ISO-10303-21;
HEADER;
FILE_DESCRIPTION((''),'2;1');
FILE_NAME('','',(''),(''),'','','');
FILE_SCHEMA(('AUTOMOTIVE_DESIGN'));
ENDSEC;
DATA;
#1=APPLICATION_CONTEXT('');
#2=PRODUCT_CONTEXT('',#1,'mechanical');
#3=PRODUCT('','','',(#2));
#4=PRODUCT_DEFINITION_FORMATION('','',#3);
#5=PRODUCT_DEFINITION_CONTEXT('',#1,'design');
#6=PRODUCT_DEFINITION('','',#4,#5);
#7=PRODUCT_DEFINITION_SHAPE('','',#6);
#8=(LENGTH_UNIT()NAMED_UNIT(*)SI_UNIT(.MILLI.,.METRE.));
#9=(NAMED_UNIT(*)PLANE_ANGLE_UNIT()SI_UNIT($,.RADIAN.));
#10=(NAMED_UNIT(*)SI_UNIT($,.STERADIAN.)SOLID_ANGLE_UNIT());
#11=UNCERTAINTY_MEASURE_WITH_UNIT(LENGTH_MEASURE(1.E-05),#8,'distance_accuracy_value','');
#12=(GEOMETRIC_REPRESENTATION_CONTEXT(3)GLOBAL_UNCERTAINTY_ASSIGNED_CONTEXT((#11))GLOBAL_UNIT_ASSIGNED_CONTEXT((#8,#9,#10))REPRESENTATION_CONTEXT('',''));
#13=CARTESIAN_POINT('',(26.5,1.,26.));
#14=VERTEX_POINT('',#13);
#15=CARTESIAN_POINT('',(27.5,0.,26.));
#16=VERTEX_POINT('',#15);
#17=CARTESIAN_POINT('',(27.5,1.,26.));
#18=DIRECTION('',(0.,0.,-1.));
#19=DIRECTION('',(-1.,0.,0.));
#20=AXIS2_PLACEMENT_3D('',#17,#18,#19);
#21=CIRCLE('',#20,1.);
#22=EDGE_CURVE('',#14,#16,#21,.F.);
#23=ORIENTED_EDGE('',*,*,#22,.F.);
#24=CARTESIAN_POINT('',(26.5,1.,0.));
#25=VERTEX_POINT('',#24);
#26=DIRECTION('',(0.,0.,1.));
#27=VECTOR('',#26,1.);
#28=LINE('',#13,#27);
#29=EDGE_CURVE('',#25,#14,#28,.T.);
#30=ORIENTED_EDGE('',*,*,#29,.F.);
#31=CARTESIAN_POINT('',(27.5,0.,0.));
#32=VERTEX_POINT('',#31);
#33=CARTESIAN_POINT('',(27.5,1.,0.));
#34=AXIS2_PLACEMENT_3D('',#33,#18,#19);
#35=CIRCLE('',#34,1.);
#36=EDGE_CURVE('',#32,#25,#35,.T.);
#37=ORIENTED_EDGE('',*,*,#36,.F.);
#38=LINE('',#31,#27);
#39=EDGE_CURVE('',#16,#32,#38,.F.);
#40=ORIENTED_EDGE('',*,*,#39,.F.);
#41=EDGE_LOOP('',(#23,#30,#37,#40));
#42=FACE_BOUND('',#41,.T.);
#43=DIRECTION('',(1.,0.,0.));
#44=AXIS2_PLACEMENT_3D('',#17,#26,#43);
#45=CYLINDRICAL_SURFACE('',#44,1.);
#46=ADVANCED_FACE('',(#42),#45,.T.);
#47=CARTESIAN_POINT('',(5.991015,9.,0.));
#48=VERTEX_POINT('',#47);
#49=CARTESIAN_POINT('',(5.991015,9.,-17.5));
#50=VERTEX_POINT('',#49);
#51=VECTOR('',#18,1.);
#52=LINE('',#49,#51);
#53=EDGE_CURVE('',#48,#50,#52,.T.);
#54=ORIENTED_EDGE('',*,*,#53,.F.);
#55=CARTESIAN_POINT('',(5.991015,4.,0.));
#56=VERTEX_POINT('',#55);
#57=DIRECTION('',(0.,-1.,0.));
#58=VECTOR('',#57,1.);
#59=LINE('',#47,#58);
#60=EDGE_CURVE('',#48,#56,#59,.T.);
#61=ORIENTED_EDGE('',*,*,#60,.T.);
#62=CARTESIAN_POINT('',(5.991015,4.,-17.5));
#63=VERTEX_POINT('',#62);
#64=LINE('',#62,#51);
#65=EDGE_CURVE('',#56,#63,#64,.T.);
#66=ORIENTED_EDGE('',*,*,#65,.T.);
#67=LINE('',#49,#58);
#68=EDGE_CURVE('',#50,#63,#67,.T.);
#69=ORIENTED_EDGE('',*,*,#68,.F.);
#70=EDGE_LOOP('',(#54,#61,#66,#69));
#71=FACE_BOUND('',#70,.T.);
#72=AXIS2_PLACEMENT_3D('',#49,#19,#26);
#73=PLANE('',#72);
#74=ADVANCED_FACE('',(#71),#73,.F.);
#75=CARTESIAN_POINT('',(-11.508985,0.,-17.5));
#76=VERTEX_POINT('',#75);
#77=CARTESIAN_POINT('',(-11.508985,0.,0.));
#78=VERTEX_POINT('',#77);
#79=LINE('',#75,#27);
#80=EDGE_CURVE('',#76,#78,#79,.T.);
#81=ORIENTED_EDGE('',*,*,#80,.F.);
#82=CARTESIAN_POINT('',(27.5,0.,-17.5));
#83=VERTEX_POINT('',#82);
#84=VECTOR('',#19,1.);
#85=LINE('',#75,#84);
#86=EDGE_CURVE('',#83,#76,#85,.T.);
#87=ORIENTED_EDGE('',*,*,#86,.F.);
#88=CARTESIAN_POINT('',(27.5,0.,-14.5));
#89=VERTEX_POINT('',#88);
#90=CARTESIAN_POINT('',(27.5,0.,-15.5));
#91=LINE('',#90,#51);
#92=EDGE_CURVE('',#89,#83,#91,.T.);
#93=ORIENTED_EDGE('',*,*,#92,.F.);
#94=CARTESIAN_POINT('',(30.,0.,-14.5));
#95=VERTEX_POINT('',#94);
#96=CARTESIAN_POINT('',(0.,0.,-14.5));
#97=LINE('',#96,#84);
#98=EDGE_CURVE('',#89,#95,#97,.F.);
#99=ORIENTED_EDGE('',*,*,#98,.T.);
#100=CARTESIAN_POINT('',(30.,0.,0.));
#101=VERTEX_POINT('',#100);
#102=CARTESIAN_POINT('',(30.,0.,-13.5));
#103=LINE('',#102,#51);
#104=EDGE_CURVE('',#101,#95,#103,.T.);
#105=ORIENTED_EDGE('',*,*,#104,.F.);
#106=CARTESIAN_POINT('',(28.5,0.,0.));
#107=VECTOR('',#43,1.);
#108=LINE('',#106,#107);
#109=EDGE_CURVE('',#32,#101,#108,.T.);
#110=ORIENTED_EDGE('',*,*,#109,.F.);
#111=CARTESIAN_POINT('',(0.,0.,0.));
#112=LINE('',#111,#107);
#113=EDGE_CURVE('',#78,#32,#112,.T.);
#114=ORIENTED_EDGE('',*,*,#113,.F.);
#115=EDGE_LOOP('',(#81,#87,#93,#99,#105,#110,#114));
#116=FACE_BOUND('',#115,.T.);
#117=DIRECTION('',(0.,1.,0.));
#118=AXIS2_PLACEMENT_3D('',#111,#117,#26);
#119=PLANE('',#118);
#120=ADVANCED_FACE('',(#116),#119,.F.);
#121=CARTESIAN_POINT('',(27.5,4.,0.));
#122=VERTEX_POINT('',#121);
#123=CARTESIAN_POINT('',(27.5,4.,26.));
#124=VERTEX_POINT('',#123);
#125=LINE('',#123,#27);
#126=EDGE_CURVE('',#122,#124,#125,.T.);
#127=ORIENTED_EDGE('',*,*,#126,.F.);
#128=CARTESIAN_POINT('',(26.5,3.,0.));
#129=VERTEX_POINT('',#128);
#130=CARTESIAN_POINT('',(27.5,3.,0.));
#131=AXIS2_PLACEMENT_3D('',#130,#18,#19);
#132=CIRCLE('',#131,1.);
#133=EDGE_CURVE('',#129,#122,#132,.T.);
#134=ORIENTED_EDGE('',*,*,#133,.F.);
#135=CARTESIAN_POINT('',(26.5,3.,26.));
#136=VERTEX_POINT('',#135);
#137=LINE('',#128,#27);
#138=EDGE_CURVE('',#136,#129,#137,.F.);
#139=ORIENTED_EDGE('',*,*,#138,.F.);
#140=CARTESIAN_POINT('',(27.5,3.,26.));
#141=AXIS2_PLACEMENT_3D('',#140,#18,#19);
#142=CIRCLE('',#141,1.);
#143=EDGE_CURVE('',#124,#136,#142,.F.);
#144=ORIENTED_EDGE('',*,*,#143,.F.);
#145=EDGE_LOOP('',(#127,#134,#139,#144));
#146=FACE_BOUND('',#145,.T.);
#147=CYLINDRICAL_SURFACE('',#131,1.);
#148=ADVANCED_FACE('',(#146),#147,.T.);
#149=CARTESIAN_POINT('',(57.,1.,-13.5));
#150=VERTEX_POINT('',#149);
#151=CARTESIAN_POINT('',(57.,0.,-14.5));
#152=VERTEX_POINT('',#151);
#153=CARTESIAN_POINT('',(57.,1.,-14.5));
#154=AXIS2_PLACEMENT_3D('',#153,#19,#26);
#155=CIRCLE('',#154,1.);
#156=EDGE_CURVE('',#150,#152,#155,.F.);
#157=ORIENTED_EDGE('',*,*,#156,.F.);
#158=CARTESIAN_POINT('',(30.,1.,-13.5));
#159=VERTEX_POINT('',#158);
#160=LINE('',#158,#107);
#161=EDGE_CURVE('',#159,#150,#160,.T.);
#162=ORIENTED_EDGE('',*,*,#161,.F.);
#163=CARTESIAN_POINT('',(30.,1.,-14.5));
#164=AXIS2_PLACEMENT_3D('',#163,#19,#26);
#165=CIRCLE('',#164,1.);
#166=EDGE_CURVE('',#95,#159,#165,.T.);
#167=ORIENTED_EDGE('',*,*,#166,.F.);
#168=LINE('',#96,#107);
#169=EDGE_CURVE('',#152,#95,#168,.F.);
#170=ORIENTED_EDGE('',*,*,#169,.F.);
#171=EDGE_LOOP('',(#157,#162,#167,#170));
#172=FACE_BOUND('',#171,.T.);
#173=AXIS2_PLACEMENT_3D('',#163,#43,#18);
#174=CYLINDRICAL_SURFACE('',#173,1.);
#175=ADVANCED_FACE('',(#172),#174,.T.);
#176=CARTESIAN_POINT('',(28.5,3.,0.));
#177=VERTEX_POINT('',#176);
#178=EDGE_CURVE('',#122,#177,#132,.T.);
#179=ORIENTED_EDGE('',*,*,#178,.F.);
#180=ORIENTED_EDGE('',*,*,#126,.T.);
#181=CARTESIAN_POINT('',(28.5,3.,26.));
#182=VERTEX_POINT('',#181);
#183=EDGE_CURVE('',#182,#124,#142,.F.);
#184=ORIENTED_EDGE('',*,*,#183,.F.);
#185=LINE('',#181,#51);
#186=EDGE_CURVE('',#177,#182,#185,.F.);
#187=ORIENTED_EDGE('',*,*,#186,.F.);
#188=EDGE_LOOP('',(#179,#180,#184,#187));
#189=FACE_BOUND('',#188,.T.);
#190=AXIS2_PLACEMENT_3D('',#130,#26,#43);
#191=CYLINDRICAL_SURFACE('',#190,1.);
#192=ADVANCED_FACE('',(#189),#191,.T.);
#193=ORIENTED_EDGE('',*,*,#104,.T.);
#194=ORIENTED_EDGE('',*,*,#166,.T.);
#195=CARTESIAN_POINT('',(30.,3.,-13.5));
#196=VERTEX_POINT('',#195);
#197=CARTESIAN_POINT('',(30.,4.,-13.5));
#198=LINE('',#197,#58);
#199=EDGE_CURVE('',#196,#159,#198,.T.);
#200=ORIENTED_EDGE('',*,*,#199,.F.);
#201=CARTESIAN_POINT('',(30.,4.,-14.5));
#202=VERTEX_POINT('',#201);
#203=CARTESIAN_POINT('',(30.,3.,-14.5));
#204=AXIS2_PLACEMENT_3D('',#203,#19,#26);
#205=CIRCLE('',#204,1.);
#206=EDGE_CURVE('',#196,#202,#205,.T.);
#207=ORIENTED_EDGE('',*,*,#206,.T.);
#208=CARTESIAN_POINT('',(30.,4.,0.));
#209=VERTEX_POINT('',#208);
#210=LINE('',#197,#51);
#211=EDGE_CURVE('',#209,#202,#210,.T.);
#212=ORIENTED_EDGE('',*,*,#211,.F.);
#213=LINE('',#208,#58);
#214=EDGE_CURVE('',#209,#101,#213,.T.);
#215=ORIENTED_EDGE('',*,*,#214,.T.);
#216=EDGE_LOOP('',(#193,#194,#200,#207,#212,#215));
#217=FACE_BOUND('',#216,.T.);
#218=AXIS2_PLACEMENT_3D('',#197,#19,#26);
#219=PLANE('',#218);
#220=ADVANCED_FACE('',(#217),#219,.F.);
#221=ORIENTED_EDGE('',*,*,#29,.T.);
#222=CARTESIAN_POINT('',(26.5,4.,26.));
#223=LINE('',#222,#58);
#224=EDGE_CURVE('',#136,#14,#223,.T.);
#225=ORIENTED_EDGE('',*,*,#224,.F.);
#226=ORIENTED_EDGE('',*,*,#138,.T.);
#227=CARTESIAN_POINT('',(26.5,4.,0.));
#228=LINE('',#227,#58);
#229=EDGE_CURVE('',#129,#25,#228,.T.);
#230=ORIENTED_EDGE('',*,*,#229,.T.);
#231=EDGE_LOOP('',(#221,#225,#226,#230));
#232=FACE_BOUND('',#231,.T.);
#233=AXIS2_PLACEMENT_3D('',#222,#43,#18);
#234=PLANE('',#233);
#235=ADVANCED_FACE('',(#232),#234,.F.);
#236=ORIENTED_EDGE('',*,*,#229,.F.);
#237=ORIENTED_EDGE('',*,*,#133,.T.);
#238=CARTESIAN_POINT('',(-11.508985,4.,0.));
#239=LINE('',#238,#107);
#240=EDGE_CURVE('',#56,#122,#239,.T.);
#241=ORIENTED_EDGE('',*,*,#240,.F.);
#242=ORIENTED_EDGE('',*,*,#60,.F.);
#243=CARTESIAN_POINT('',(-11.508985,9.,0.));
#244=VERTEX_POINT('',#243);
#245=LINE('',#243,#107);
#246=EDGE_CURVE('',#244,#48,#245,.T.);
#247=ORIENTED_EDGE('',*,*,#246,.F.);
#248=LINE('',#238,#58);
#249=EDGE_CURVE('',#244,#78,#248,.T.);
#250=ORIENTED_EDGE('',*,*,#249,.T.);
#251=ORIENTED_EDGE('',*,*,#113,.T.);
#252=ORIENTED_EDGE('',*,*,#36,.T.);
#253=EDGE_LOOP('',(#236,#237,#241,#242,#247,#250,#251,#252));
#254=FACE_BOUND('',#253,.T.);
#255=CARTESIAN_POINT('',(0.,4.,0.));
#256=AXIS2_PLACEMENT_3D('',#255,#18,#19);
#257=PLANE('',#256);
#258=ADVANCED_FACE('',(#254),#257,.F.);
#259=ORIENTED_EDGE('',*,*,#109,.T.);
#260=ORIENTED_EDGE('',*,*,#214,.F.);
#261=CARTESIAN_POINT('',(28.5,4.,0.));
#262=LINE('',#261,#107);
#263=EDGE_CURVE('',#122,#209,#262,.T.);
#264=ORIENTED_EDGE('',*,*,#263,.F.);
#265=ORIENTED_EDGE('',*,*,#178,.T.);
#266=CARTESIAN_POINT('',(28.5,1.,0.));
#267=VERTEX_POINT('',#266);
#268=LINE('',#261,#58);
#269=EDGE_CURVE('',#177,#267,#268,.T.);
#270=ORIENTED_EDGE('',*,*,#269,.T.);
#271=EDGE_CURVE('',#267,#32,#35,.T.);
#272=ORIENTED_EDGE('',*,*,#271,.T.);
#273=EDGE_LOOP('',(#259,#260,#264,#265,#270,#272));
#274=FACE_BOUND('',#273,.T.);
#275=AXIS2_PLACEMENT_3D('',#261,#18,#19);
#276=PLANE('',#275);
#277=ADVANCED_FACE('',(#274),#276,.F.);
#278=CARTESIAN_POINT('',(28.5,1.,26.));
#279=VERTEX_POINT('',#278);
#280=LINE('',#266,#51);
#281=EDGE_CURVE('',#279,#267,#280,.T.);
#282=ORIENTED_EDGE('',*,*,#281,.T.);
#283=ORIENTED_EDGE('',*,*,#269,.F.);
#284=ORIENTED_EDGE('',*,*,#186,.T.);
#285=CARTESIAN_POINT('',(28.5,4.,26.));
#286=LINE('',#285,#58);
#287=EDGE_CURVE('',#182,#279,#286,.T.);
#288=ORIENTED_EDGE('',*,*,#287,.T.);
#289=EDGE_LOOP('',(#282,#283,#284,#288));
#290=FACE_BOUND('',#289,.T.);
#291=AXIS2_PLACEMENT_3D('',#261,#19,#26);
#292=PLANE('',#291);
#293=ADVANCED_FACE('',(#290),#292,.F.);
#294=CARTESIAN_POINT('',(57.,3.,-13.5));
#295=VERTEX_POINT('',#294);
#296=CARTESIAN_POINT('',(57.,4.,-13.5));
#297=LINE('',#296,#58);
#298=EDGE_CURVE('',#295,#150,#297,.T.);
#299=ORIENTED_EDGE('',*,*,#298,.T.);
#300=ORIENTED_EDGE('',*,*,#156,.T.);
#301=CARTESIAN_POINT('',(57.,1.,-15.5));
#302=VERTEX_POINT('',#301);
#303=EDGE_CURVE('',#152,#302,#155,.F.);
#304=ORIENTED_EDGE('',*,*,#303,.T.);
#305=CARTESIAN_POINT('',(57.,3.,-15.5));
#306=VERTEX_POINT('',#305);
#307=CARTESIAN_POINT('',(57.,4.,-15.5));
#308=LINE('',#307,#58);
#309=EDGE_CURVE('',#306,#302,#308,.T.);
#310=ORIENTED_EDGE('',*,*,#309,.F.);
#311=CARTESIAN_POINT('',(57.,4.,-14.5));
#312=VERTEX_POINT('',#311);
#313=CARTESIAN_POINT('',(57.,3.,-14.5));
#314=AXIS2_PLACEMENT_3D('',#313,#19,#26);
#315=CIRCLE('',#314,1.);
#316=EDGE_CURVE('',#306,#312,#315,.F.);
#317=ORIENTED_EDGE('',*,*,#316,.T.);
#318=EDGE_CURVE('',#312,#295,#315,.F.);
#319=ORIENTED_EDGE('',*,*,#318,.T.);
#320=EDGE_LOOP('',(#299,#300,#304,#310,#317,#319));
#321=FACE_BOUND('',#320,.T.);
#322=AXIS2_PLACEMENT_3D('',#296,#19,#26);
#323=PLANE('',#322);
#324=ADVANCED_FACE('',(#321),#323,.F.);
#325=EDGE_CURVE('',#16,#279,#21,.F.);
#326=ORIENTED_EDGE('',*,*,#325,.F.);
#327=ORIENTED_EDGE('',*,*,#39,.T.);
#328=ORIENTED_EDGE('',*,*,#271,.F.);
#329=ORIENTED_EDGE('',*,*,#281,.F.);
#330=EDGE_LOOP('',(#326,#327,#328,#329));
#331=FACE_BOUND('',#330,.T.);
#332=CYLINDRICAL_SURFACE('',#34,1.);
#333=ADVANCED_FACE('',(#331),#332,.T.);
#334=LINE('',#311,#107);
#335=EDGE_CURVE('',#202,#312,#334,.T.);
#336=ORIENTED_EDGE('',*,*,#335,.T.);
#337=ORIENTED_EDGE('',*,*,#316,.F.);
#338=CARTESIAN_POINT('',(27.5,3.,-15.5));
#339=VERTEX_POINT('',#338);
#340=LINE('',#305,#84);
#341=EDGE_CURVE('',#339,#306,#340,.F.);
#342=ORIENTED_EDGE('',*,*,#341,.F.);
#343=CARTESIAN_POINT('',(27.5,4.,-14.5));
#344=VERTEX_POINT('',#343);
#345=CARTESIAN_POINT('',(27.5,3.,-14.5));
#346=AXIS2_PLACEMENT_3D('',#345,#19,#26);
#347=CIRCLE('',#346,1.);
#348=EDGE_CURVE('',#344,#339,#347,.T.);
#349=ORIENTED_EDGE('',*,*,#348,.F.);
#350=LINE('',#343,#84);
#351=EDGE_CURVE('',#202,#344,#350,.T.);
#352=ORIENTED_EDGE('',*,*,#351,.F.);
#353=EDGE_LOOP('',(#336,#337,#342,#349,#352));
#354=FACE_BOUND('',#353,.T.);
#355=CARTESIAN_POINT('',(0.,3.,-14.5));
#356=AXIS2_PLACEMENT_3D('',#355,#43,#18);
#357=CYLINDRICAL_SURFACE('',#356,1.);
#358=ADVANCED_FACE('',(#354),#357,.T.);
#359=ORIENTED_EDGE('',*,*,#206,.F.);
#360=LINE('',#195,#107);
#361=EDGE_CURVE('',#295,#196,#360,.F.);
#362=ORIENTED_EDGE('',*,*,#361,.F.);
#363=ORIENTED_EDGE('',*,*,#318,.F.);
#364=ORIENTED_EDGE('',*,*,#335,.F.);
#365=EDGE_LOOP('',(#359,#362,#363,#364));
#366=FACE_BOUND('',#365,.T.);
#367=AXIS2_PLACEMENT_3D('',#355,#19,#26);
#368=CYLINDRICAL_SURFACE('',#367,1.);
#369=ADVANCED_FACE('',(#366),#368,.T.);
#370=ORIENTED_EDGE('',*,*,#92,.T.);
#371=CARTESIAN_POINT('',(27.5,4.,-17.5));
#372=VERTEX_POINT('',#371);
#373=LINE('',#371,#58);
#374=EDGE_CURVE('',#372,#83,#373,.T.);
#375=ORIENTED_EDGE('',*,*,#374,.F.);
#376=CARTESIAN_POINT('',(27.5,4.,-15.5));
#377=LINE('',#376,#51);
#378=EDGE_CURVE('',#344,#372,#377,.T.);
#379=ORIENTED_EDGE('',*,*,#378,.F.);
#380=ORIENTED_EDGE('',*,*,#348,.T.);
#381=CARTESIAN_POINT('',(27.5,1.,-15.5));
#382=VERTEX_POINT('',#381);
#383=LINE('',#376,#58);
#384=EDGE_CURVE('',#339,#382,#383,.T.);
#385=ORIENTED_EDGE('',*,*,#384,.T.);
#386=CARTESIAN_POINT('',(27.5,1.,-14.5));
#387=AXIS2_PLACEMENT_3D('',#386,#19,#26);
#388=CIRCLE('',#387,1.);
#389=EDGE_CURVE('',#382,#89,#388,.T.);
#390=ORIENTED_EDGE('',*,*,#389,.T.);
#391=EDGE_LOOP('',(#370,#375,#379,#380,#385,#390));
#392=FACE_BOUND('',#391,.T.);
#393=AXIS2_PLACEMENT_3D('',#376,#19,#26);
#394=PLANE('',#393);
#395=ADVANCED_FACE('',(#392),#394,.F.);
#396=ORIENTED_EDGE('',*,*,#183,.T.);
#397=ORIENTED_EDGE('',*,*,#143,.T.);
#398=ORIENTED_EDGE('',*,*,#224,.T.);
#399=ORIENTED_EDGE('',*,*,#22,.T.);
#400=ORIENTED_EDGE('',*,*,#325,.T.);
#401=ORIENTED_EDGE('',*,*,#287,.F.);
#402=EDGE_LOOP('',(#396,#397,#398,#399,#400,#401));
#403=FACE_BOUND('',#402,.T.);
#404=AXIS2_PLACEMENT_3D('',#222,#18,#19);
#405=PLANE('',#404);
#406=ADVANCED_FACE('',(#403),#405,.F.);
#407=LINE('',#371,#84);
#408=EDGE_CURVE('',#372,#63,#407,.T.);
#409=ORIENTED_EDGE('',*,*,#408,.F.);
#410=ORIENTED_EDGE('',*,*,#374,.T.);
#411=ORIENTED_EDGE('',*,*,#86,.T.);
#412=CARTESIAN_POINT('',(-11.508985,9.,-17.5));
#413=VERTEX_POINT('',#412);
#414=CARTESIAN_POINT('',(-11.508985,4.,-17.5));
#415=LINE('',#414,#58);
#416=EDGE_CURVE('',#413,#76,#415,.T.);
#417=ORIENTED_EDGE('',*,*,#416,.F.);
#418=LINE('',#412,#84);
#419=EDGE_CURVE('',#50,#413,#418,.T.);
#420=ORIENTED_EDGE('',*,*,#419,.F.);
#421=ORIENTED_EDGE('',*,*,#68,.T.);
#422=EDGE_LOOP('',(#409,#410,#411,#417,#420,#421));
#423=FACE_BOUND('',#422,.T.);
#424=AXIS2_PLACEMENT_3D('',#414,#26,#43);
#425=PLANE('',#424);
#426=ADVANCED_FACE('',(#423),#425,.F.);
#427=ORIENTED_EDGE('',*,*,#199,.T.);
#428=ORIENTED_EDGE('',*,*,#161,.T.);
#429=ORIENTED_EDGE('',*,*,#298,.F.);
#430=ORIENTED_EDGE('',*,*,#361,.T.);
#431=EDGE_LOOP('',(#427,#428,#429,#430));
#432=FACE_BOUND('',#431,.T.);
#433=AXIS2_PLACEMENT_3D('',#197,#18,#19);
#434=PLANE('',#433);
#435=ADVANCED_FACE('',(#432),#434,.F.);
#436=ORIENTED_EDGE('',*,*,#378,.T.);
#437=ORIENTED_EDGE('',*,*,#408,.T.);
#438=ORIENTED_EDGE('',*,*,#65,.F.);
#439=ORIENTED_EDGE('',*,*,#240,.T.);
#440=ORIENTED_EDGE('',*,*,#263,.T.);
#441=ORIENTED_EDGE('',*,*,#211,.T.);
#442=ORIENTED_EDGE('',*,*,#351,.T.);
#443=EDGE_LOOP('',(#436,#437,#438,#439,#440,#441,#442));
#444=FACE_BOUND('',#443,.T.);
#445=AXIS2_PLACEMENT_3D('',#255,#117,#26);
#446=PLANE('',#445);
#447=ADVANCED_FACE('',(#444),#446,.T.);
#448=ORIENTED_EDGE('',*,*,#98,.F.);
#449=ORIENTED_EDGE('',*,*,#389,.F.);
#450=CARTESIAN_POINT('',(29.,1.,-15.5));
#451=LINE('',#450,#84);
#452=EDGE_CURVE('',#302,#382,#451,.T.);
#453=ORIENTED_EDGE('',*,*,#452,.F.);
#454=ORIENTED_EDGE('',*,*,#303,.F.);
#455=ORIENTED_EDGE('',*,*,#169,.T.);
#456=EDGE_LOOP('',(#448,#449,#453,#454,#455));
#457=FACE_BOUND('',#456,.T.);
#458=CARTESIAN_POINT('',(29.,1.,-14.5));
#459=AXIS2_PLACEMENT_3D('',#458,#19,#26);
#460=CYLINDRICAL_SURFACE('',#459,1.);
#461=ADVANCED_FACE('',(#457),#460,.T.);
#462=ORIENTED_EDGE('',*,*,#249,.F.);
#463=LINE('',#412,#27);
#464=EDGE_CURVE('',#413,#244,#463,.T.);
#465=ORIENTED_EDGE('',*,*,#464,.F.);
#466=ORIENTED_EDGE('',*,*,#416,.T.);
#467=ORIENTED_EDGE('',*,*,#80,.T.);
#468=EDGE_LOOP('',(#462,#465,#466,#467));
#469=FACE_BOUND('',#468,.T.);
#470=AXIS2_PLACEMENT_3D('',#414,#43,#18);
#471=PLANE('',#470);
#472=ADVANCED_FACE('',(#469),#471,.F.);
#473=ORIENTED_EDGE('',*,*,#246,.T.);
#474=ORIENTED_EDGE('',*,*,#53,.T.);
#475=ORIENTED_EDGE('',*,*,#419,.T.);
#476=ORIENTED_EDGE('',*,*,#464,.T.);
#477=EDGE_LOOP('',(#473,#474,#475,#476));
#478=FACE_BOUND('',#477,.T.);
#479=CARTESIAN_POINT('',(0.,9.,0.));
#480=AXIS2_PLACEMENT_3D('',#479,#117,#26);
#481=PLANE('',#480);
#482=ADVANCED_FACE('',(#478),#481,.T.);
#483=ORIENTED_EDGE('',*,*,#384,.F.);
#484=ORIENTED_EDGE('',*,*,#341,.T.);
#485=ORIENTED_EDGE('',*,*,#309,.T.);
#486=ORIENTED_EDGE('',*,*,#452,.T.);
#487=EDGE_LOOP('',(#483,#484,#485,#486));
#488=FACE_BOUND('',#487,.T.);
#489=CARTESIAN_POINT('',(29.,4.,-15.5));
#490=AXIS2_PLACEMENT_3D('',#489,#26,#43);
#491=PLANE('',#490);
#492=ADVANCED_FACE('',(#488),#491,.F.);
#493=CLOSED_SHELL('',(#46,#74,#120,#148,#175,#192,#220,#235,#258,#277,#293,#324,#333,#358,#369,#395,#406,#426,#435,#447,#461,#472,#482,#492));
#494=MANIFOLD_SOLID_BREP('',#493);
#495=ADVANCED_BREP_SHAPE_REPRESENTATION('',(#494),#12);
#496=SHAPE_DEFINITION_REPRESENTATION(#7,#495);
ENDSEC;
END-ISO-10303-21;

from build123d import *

# Parameters (mm, degrees)
BOSS_EXTRUDE1_DEPTH = 4
FILLET1_R           = 1
SKETCH4_W           = 17.5
SKETCH4_H           = 17.5
BOSS_EXTRUDE3_DEPTH = 5


with BuildPart() as part:
    # Sketch2 → Boss-Extrude1 (new body)
    with BuildSketch(Plane(origin=(0, 0, 0), x_dir=(1, 0, 0), z_dir=(0, 1, 0))):
        Polygon((0, 0), (26.5, 0), (26.5, -26), (28.5, -26), (28.5, 0), (30, 0), (30, 13.5), (57, 13.5), (57, 15.5), (29, 15.5), (27.5, 15.5), (27.5, 17.5), (2.991015417, 17.5), (-11.508984583, 17.5), (-11.508984583, 0), align=None)
    extrude(amount=BOSS_EXTRUDE1_DEPTH)

    # Fillet1
    fillet1_edges = [part.edges().sort_by_distance(p)[0] for p in [
        (42.25, 0, -15.5),
        (28.5, 0, 13),
        (26.5, 0, 13),
        (43.5, 0, -13.5),
        (42.25, 4, -15.5),
        (43.5, 4, -13.5),
        (28.5, 4, 13),
        (26.5, 4, 13),
    ]]
    fillet(fillet1_edges, radius=FILLET1_R - 0.0001)  # a hair under: the kernel refuses the full size

    # Sketch4 → Boss-Extrude3 (add)
    with BuildSketch(Plane(origin=(0, 4, 0), x_dir=(1, 0, 0), z_dir=(0, 1, 0))):
        with Locations((-2.758984583, 8.75)):
            Rectangle(SKETCH4_W, SKETCH4_H)
    extrude(amount=BOSS_EXTRUDE3_DEPTH)


solid = part.part
